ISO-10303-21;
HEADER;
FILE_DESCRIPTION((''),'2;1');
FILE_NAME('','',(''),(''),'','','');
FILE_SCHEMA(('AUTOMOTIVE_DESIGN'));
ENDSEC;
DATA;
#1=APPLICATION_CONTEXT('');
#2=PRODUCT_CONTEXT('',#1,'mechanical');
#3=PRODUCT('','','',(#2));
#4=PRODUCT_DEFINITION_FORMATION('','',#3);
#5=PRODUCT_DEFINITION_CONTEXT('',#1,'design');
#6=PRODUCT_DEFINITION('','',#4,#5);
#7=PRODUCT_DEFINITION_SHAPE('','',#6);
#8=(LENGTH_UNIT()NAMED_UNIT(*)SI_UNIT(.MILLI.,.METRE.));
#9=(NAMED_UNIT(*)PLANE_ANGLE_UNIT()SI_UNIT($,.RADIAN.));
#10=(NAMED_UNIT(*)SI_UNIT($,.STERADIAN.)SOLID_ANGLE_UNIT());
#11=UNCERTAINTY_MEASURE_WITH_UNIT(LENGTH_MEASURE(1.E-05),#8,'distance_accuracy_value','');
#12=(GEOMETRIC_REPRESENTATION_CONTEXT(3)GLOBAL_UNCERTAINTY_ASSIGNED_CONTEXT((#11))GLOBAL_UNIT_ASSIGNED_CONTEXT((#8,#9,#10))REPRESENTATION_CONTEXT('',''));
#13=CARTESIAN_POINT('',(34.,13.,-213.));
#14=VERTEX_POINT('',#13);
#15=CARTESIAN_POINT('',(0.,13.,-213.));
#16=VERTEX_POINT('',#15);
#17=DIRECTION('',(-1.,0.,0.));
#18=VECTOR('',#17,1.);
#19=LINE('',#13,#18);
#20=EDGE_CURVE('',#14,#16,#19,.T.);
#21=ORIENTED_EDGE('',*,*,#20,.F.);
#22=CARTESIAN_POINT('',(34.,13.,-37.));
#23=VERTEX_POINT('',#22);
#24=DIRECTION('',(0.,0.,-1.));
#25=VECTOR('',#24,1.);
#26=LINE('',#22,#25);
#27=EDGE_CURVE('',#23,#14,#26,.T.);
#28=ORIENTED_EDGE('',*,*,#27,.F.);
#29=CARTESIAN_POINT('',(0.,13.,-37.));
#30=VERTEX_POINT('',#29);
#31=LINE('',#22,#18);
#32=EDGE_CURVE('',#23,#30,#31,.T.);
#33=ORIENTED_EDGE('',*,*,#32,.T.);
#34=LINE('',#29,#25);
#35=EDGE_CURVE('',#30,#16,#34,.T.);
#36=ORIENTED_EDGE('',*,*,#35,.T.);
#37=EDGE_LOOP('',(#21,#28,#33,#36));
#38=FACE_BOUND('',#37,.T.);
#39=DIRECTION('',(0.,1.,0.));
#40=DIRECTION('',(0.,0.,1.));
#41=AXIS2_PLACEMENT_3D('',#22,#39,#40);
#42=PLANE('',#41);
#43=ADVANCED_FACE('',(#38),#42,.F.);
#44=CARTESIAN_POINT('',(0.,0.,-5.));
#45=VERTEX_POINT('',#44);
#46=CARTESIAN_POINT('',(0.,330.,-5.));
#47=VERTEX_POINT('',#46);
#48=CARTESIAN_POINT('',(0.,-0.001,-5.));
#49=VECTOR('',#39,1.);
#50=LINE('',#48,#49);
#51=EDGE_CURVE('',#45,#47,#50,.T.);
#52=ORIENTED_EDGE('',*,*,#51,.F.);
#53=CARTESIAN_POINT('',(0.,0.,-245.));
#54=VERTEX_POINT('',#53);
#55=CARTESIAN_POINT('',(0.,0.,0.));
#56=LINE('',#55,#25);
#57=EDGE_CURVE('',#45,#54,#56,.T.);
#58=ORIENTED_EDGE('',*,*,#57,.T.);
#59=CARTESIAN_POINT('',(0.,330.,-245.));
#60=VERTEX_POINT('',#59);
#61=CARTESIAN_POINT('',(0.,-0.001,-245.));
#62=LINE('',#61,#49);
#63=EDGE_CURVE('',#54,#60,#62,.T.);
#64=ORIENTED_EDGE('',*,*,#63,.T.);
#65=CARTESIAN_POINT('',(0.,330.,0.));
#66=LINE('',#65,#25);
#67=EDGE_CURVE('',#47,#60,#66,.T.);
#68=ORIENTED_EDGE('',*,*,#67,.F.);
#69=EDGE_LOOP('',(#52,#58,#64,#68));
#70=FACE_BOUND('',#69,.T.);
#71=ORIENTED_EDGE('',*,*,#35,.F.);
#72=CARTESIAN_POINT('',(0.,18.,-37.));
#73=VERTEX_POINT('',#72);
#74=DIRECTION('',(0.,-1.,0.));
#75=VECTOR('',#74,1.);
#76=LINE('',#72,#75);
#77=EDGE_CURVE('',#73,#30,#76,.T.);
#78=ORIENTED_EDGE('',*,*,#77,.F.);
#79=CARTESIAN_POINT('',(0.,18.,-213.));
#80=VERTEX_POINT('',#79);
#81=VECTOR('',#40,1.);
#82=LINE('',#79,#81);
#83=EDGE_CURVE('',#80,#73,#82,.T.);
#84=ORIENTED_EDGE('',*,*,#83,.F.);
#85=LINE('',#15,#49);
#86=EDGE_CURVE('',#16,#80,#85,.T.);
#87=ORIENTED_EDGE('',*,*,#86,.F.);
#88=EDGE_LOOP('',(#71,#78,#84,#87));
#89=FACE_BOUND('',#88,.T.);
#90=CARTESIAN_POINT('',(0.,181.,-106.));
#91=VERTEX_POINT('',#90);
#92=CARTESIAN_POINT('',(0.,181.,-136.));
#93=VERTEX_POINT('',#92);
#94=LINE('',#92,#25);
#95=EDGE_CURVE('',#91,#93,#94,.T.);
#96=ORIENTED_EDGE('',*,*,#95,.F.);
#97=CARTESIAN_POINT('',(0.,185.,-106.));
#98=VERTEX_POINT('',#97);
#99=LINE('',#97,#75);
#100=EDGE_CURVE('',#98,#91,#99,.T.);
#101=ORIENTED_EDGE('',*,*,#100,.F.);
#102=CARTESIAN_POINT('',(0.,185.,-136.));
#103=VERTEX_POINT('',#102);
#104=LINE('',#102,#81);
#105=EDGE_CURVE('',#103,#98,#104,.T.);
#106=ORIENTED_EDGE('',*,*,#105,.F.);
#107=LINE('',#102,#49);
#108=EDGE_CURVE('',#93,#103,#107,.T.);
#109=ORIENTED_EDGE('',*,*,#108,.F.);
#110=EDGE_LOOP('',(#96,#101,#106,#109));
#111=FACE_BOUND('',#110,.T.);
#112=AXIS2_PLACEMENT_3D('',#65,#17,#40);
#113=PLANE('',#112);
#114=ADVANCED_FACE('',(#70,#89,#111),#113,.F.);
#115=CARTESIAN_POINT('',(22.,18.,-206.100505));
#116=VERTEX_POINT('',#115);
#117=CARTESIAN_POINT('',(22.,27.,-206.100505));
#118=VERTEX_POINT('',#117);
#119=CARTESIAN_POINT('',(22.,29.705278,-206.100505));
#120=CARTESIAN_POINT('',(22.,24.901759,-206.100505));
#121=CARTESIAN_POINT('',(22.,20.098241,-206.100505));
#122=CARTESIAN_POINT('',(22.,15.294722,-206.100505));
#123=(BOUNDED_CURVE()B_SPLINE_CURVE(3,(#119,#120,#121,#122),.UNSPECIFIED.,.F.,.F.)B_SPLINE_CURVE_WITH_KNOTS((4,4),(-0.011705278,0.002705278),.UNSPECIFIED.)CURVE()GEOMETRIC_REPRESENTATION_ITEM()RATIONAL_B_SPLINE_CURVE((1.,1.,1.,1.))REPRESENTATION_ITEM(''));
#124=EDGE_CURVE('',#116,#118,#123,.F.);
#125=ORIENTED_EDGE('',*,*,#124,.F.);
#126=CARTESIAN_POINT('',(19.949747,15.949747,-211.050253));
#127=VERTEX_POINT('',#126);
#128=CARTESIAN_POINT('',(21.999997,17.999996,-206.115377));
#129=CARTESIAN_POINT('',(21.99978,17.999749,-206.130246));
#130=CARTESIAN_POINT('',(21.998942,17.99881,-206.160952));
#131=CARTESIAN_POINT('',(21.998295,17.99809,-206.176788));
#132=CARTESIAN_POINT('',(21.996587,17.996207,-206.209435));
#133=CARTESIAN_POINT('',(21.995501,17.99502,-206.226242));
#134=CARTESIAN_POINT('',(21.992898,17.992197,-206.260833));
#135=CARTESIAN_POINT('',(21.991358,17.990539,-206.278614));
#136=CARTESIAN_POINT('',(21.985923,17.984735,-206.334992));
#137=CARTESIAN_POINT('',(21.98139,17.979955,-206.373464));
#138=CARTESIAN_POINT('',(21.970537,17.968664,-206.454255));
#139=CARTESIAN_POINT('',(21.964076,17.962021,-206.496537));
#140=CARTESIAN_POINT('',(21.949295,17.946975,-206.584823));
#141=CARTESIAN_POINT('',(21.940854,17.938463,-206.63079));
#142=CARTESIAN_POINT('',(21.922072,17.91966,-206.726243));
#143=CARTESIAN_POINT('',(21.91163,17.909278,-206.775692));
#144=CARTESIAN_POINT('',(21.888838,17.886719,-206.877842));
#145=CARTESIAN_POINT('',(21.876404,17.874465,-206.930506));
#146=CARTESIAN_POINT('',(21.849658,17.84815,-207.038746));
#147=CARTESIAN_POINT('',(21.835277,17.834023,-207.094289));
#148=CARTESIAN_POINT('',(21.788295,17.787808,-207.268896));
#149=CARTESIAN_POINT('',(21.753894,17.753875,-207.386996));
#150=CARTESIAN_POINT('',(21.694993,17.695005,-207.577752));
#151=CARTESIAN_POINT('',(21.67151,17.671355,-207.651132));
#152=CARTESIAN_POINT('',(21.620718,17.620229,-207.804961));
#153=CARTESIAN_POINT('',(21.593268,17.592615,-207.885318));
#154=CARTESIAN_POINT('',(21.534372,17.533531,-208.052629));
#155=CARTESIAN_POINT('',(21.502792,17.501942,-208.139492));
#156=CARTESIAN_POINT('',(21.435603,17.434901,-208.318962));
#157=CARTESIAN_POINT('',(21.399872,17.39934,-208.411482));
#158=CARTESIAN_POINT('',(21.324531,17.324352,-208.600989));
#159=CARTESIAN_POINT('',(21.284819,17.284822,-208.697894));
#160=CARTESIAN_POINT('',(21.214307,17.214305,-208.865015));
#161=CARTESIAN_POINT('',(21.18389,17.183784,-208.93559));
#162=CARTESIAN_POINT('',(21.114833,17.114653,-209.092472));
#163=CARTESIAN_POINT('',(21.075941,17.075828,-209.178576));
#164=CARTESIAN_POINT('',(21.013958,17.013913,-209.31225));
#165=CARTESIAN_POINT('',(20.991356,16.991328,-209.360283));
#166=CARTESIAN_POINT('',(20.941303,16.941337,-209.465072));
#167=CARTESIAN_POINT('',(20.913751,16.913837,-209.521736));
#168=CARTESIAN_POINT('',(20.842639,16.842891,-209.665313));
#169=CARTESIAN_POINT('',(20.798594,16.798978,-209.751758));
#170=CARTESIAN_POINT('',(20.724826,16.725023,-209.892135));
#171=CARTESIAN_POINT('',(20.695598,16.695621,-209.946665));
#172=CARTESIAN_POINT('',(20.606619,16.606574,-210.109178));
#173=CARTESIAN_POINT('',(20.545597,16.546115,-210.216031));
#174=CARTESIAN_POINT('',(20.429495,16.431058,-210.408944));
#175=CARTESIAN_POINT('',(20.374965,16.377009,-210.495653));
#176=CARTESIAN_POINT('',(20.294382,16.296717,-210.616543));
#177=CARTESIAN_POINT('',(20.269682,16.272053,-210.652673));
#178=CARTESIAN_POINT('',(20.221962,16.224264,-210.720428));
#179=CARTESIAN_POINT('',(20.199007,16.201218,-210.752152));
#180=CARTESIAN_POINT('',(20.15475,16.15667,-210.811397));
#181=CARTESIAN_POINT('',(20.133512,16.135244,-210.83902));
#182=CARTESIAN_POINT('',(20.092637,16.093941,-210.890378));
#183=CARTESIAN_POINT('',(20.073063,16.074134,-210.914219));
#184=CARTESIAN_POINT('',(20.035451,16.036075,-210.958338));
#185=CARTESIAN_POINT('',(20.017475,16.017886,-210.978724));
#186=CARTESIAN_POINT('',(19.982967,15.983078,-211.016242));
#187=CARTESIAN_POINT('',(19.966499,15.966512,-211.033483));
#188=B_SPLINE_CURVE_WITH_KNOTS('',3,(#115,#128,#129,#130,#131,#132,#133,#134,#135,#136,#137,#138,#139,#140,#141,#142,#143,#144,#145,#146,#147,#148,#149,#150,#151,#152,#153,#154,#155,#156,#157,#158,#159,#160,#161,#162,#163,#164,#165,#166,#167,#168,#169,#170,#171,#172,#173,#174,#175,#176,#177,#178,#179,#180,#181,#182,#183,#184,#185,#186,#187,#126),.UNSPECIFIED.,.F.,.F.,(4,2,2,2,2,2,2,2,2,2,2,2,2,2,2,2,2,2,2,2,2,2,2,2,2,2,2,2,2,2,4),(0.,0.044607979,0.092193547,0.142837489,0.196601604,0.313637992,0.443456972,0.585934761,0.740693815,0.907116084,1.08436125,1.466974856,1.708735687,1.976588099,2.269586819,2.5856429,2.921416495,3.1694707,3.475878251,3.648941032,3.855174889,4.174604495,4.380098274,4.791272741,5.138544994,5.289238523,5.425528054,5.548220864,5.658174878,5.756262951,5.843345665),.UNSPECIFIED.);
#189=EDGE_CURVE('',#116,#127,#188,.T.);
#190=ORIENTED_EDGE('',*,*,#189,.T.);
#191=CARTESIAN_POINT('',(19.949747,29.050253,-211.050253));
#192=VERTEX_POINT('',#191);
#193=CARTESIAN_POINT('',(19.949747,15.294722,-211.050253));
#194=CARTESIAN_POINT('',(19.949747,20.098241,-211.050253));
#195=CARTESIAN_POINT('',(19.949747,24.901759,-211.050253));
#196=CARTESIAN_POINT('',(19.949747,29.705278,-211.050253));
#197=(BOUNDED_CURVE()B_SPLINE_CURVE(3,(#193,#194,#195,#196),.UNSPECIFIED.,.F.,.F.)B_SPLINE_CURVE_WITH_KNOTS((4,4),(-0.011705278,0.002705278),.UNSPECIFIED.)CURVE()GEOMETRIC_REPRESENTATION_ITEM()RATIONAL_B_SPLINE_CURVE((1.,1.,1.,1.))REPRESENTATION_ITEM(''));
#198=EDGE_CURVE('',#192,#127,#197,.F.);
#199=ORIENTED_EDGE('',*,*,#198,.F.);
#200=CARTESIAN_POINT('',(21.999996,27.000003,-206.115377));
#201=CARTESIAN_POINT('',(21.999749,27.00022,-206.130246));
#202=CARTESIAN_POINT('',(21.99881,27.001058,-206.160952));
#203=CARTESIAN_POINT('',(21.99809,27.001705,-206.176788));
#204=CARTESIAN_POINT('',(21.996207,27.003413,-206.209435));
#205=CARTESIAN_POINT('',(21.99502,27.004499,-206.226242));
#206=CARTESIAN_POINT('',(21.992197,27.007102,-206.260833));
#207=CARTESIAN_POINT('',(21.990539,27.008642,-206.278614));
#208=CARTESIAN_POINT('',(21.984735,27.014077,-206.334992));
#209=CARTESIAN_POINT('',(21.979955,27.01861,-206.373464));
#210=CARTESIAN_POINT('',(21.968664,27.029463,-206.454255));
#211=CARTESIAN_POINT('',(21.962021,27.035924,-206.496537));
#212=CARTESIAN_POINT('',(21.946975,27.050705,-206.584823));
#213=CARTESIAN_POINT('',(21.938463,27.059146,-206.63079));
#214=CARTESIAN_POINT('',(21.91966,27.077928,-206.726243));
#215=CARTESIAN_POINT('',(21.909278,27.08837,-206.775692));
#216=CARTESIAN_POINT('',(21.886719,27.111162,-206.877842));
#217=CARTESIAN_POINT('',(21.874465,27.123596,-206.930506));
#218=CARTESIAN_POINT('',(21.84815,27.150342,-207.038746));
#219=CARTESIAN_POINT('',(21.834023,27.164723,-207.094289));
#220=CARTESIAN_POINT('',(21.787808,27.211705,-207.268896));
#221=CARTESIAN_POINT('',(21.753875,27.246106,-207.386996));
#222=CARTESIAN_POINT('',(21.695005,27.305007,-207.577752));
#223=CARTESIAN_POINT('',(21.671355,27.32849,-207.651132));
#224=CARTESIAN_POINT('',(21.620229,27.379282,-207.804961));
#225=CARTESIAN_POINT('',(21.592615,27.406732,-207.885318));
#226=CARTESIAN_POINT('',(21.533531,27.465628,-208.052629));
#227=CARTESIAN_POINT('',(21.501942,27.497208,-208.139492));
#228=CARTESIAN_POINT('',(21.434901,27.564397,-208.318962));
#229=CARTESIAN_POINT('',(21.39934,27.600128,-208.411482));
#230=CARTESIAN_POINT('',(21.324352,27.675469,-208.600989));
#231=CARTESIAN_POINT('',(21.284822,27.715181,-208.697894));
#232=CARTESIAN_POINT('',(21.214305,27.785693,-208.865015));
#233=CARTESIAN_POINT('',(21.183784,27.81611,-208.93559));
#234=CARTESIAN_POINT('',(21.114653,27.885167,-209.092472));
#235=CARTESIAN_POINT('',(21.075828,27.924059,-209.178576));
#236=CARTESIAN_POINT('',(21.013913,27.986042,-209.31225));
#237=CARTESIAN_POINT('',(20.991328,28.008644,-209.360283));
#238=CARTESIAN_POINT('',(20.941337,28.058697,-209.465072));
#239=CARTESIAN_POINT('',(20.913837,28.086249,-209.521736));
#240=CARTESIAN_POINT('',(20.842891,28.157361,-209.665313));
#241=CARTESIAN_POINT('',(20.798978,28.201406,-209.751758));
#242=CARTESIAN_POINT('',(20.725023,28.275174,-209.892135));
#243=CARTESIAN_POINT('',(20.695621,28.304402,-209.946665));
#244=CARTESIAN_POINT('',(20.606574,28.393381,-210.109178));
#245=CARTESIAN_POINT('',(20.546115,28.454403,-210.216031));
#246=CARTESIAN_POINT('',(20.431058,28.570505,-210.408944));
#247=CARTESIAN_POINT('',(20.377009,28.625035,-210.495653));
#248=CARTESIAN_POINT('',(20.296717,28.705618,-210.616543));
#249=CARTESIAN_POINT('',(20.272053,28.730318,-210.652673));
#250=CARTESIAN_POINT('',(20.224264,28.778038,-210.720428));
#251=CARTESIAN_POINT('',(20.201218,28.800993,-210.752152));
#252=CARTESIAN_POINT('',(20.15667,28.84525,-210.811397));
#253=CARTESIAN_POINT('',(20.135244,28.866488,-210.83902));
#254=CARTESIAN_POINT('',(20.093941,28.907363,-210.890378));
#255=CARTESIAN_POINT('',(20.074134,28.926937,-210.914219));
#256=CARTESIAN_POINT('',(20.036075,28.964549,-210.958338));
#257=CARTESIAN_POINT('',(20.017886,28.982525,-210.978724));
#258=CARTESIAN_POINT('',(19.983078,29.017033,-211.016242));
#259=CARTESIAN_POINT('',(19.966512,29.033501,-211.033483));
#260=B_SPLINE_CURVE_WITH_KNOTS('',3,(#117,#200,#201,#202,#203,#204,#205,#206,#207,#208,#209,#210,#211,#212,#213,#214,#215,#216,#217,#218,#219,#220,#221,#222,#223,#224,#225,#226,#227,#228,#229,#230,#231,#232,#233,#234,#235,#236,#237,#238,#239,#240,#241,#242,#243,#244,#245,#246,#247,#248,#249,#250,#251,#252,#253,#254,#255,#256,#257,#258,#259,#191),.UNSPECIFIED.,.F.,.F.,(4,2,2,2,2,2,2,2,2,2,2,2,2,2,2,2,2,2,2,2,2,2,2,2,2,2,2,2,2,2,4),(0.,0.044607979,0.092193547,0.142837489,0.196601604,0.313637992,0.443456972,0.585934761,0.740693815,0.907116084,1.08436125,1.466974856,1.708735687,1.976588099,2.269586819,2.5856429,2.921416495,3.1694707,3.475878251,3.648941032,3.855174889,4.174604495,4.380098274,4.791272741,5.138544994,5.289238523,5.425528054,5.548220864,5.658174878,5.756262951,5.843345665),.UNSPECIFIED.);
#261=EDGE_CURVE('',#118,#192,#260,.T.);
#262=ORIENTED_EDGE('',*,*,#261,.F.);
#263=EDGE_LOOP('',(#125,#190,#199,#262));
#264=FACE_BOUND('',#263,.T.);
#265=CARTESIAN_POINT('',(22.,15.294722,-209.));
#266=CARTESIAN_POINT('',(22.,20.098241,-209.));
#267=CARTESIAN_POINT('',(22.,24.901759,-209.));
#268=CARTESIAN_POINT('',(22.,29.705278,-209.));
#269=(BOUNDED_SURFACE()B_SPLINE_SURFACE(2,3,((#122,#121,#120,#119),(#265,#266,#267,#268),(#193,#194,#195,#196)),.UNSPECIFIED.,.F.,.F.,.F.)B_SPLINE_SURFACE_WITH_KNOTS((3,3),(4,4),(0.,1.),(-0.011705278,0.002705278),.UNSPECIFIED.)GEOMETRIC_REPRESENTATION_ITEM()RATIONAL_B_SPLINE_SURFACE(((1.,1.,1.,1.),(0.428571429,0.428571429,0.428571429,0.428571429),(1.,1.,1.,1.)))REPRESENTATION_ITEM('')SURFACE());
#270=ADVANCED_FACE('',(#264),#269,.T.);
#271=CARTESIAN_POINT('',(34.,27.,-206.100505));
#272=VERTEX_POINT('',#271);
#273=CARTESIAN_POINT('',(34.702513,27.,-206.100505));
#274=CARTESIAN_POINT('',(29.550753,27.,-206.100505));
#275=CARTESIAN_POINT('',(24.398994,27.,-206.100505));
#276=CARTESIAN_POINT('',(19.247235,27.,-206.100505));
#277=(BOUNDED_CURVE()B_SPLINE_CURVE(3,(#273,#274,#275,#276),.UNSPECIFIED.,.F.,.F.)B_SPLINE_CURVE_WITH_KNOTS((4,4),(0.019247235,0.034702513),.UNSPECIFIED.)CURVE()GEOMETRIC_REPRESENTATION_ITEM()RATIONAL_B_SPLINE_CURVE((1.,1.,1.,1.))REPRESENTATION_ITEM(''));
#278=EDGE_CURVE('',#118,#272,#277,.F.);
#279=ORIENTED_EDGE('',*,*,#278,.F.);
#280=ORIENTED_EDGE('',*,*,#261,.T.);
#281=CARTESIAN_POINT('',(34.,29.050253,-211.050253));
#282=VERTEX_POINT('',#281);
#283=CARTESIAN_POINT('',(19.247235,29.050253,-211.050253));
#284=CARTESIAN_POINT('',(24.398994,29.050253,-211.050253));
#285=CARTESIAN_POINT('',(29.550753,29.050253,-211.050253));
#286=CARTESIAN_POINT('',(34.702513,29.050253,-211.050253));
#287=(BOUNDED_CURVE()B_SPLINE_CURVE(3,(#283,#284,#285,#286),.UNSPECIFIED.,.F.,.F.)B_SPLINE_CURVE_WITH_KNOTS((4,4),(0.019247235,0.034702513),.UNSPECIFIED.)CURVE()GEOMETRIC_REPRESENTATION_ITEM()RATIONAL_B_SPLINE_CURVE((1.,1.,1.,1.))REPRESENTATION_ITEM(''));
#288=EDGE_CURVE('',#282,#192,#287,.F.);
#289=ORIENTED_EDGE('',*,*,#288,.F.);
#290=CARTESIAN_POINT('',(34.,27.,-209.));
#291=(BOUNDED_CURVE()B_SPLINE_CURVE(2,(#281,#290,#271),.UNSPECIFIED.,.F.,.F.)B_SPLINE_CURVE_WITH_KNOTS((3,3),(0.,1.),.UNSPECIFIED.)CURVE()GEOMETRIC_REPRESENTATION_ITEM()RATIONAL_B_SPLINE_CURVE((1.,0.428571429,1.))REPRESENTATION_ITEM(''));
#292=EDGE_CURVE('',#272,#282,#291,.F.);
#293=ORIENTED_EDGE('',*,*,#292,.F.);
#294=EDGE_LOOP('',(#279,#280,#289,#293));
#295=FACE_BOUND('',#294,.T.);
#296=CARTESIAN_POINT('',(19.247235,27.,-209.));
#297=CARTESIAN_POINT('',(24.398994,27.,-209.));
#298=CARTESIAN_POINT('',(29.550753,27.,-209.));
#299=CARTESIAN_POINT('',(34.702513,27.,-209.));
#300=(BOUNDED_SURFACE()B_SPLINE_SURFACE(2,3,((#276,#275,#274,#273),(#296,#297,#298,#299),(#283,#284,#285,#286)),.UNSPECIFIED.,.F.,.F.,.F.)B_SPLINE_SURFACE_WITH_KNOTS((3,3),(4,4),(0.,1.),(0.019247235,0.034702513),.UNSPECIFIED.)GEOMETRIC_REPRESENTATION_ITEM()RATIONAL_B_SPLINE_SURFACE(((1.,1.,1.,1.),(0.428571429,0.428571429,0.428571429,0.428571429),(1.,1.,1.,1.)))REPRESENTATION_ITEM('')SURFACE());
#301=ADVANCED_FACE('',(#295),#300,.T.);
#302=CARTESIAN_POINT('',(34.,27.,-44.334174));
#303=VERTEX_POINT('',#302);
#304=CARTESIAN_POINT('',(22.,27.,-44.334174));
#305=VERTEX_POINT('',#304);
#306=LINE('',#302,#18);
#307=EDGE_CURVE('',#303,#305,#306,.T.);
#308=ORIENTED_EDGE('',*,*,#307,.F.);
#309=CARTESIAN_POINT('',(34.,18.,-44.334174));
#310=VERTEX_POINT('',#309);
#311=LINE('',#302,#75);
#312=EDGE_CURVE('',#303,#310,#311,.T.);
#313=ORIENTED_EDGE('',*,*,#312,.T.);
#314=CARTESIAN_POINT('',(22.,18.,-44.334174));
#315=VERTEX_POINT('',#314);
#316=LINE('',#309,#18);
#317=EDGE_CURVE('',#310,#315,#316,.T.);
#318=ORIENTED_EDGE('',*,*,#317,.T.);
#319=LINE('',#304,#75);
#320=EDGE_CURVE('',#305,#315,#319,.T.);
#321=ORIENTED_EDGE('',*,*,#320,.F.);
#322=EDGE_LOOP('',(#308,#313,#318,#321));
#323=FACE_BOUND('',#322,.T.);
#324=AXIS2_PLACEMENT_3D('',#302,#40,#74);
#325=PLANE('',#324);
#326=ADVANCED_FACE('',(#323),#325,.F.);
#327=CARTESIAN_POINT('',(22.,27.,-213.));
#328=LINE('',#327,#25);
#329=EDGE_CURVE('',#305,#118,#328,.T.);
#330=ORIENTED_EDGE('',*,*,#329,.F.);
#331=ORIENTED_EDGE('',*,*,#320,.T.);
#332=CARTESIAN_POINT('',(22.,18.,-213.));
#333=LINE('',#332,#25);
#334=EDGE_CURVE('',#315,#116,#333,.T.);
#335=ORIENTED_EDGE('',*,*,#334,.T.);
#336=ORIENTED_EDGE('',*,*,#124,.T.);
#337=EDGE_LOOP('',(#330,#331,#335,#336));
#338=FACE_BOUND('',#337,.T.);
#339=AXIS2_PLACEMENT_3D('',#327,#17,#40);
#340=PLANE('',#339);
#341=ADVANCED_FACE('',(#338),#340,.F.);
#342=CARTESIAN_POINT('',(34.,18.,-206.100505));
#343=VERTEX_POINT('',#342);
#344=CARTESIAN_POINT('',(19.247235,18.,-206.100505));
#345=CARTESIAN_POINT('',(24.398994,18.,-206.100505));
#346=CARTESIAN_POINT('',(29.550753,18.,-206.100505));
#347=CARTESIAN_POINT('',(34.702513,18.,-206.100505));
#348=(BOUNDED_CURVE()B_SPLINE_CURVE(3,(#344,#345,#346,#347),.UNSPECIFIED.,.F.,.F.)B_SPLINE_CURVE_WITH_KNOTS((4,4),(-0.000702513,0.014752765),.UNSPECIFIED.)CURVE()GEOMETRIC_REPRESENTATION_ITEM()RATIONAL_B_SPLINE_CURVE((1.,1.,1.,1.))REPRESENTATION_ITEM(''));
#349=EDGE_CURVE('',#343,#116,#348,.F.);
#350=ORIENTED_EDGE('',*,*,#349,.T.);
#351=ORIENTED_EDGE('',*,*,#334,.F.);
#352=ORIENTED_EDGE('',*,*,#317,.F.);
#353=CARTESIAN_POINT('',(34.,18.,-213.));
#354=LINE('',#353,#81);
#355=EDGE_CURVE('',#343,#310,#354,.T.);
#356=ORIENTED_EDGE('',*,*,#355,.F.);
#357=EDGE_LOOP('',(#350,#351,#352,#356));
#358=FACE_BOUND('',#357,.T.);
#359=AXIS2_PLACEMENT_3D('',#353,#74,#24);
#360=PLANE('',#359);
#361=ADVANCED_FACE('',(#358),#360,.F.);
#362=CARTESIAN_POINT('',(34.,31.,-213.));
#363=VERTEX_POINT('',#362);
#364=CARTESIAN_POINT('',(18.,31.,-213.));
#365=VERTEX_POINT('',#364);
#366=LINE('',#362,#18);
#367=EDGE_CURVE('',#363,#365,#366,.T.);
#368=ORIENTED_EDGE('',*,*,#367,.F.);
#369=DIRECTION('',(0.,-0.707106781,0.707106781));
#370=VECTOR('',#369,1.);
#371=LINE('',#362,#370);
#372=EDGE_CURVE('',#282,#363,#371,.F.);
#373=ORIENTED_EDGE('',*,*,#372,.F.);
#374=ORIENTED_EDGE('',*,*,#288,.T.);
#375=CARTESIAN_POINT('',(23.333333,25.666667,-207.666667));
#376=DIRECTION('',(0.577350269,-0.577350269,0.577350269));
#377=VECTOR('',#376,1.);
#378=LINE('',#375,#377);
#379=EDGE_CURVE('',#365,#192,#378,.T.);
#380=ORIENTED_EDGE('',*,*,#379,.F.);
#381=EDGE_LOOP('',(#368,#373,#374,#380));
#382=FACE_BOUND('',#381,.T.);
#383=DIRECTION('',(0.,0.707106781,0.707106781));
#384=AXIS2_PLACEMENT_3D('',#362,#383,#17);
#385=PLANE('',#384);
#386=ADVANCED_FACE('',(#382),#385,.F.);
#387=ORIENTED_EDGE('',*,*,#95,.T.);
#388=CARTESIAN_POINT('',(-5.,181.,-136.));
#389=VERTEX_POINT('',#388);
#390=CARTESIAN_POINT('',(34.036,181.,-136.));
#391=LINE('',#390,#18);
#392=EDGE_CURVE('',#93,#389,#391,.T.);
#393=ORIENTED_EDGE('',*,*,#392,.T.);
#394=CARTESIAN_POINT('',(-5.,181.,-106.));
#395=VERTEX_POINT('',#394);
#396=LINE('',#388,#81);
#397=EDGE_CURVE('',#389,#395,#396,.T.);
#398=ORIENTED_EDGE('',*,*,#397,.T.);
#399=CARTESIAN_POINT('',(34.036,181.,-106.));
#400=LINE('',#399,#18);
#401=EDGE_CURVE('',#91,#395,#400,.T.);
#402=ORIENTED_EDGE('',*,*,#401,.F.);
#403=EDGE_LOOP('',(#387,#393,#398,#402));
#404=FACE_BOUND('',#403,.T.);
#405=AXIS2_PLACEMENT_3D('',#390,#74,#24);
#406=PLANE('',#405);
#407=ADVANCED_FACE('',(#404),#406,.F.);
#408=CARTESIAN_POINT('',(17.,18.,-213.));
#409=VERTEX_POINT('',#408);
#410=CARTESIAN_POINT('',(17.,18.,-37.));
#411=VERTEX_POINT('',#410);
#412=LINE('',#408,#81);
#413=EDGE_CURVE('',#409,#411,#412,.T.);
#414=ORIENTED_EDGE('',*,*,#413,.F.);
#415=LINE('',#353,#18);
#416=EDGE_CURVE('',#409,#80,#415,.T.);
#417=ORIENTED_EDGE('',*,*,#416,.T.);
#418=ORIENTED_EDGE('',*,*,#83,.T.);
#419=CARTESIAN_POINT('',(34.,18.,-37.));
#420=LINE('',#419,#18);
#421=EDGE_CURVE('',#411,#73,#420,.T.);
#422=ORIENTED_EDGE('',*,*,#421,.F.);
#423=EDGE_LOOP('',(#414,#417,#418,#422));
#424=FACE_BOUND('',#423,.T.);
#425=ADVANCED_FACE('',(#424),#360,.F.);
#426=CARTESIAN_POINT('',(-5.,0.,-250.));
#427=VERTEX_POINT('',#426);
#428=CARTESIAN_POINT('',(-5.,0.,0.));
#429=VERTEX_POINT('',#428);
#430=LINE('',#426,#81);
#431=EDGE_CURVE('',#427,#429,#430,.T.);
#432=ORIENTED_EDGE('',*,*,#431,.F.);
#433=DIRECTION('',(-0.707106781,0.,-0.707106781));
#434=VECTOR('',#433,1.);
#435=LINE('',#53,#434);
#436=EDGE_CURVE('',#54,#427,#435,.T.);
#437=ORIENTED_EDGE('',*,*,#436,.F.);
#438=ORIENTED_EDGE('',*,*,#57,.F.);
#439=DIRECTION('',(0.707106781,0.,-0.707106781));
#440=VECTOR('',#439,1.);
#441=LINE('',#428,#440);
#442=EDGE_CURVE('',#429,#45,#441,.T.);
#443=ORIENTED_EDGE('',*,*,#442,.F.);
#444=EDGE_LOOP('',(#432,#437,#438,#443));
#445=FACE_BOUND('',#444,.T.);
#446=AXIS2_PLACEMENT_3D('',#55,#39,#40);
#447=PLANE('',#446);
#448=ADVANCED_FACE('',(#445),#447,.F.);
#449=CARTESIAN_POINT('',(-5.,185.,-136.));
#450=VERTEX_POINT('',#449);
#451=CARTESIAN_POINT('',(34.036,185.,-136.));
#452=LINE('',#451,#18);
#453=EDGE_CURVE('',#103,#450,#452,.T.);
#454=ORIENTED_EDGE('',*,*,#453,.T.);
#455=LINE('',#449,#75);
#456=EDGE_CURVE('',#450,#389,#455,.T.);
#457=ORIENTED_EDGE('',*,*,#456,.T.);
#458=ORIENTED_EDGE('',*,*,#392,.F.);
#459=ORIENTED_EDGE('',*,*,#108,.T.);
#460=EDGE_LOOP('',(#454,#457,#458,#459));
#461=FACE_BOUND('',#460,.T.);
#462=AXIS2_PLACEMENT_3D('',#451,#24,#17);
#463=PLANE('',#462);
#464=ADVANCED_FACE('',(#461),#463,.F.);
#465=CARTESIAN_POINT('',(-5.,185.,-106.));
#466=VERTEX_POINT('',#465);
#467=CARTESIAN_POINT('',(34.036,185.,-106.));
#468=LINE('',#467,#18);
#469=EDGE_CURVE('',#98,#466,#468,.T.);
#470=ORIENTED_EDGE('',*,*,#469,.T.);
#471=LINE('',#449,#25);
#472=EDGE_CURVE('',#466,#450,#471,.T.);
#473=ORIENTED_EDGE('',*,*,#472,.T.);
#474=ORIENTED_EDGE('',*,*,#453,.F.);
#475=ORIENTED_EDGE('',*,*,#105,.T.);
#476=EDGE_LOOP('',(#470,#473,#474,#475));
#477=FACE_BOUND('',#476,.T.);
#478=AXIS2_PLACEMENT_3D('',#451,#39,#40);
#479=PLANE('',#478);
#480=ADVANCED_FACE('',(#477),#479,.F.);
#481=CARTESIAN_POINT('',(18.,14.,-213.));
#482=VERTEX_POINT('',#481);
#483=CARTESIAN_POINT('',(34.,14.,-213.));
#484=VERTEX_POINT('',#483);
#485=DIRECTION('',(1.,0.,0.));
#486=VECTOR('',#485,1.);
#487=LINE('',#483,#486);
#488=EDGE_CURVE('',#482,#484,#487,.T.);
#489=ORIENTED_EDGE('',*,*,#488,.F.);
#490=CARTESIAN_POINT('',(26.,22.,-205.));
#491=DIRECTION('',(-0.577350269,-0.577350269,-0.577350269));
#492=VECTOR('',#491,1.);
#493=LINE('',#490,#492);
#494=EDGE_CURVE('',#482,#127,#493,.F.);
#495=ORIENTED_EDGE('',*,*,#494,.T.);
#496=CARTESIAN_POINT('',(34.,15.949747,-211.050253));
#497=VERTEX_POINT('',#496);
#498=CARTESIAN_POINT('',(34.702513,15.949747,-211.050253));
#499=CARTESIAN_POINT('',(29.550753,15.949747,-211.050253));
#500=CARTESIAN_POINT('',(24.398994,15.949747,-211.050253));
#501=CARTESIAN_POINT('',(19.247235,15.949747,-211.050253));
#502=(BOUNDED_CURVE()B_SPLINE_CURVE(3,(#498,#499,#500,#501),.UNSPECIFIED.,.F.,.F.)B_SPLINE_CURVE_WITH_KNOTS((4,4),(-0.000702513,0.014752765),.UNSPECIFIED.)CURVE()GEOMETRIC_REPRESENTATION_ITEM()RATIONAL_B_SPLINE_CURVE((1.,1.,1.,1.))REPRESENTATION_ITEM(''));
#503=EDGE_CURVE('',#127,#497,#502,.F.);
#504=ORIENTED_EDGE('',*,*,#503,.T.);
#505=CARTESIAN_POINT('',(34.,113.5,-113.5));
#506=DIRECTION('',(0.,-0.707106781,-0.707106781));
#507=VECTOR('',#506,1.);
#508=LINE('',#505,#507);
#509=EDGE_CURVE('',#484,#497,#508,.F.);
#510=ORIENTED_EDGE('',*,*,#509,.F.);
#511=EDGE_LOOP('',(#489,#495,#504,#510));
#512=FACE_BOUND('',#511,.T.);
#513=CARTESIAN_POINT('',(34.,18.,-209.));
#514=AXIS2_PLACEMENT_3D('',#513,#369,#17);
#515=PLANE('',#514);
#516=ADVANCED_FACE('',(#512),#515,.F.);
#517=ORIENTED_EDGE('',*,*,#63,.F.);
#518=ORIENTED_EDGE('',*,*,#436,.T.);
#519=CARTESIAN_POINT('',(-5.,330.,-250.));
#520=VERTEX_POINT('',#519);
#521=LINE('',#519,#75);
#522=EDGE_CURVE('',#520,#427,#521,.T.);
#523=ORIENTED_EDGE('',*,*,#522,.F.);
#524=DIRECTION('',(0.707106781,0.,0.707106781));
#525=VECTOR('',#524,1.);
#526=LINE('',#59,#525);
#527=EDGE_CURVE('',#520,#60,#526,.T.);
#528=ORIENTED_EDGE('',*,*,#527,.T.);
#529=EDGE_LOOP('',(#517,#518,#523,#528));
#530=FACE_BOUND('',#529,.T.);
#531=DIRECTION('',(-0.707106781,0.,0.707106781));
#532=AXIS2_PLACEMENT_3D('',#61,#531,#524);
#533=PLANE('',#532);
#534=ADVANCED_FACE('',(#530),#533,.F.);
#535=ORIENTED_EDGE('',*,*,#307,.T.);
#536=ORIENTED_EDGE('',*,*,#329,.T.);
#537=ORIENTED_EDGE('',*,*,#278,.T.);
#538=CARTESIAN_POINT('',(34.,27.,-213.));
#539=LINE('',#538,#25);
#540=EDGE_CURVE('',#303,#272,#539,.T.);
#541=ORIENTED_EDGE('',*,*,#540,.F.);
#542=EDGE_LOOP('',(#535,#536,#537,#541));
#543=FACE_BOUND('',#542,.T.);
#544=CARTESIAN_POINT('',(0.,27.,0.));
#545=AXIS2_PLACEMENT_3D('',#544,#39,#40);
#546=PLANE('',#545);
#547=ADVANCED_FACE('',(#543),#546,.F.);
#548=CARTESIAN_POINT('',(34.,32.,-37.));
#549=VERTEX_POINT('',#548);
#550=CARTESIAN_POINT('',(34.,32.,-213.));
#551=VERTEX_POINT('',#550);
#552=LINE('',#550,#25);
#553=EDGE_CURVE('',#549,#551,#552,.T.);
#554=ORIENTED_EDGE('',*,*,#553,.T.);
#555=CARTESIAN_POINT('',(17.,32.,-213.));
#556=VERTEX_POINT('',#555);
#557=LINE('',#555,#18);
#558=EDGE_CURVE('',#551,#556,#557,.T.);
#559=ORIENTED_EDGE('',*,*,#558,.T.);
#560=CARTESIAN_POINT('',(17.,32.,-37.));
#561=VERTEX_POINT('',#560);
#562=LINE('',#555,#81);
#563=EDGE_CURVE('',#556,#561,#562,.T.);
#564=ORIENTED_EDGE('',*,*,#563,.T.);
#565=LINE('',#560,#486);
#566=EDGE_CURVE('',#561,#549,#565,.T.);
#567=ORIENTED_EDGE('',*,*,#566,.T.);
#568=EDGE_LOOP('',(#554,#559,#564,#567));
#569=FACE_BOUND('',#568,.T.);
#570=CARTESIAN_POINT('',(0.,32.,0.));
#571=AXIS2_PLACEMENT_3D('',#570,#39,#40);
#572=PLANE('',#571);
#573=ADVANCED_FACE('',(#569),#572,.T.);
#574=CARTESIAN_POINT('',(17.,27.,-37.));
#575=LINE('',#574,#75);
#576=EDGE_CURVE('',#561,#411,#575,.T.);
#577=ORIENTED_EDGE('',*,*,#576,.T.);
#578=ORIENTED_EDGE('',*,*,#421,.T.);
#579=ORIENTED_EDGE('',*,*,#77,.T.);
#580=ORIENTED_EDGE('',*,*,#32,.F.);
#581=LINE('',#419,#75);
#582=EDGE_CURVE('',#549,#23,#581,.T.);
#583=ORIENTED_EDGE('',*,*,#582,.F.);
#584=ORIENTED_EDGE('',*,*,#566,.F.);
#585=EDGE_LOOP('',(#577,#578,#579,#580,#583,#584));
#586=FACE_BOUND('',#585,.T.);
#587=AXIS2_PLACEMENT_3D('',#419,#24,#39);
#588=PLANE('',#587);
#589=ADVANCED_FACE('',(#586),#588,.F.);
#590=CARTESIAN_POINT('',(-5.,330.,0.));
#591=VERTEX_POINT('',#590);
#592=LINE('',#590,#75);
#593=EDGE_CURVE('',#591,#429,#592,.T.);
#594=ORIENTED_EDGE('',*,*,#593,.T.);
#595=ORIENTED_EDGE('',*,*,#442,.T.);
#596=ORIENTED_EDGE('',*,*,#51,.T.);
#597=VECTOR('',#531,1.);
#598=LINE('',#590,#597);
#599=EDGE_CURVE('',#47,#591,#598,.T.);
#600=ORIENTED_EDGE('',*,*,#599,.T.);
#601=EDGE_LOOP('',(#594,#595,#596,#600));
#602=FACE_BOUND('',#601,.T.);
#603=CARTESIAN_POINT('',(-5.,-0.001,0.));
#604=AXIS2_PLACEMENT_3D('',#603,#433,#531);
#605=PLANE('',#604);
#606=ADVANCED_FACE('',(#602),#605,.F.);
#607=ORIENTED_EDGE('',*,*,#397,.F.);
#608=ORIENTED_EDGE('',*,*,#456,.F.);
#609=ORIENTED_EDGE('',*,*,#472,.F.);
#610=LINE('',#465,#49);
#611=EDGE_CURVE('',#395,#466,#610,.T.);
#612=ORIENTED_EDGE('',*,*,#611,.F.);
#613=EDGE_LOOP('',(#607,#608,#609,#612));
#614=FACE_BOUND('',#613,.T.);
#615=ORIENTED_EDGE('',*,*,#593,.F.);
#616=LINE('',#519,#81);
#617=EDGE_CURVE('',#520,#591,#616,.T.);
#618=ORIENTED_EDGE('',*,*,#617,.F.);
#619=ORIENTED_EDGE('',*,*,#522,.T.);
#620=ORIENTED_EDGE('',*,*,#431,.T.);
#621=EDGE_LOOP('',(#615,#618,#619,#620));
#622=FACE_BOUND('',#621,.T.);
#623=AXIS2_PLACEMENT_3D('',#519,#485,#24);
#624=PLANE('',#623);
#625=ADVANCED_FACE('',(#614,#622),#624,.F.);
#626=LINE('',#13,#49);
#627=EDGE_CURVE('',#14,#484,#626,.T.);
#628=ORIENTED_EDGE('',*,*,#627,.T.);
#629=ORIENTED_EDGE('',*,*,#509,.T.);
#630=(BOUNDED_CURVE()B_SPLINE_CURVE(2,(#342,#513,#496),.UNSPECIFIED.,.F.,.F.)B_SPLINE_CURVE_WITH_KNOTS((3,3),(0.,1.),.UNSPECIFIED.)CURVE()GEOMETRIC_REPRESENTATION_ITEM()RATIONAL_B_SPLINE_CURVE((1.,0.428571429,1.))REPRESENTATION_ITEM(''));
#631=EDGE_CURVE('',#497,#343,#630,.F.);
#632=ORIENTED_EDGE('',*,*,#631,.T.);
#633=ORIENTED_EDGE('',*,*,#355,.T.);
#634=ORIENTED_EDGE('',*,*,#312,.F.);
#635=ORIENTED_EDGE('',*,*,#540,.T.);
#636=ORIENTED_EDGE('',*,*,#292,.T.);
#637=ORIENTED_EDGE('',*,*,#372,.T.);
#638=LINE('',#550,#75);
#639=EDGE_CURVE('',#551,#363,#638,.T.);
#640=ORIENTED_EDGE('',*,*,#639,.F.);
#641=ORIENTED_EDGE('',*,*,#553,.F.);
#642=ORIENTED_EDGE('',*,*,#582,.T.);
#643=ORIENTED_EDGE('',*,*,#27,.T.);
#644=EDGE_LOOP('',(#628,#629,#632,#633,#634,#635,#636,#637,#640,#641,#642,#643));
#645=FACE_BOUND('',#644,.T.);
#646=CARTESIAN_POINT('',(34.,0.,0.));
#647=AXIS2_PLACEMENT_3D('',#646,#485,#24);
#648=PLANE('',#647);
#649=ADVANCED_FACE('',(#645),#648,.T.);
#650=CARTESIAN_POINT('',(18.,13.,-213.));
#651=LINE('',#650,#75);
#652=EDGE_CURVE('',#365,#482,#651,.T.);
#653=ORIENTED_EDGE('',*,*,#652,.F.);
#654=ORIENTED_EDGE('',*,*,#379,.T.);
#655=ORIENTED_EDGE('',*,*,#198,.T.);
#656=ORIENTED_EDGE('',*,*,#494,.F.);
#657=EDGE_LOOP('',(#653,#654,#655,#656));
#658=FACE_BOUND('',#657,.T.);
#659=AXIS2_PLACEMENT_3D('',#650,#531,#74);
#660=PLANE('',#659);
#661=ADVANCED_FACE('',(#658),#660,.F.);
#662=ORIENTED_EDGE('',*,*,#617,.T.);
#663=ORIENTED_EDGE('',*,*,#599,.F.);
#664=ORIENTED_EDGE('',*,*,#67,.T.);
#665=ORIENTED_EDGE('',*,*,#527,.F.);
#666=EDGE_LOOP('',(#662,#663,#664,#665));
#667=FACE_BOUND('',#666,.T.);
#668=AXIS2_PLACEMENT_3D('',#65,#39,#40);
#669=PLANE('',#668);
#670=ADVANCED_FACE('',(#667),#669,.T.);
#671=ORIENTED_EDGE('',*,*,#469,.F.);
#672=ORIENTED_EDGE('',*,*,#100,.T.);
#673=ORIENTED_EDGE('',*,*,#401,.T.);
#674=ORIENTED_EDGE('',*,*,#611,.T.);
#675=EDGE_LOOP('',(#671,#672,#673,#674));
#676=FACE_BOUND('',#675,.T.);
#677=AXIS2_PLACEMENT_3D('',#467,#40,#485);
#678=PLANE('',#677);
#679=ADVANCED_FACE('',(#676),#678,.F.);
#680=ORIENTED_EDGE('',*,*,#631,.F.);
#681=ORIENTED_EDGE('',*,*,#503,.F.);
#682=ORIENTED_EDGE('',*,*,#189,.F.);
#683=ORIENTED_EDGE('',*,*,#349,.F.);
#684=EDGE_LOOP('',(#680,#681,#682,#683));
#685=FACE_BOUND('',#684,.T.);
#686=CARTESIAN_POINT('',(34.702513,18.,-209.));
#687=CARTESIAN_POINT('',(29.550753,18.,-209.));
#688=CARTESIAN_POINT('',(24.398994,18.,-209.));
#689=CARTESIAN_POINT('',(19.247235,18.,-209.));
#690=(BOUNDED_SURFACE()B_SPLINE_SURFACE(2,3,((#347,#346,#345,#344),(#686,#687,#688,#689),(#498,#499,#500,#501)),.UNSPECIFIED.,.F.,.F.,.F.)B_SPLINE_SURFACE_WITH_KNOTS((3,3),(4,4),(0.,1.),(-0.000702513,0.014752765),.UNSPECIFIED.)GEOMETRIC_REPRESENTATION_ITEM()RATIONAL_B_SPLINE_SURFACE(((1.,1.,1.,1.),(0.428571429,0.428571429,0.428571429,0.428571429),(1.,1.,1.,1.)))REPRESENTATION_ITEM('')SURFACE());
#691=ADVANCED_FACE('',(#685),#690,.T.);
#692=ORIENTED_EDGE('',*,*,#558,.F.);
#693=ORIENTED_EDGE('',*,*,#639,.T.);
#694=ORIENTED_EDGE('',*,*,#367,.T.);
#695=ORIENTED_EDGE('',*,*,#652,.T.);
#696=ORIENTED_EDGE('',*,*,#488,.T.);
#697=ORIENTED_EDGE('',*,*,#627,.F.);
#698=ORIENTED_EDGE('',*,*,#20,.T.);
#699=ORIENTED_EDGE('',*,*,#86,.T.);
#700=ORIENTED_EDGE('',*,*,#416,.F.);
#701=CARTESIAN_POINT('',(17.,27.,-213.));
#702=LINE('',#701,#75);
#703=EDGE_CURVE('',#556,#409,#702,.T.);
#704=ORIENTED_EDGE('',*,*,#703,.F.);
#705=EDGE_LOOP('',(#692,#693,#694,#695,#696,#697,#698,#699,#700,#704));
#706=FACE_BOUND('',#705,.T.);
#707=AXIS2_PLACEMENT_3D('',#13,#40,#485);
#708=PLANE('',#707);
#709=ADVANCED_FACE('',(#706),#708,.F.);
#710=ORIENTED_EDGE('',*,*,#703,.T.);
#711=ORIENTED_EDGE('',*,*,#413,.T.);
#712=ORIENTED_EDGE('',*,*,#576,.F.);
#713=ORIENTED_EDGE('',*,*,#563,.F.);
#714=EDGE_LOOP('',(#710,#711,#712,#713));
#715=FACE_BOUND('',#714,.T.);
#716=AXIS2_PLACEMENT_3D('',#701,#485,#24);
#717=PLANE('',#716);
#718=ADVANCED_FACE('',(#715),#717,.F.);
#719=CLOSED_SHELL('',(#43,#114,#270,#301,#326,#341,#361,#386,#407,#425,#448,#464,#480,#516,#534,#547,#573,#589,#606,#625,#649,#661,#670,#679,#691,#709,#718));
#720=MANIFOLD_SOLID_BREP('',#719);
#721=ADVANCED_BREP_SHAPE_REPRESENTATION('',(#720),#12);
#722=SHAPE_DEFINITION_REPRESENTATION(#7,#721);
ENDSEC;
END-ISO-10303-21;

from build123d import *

# Parameters (mm, degrees)
CROQUIS1_W              = 5
CROQUIS1_H              = 250
SALIENTE_EXTRUIR1_DEPTH = 330
CORTAR_EXTRUIR1_REACH   = 416.035
CROQUIS3_W              = 176
CROQUIS3_H              = 5
SALIENTE_EXTRUIR2_DEPTH = 34
CROQUIS4_W              = 5
CROQUIS4_H              = 176
SALIENTE_EXTRUIR3_DEPTH = 9
CROQUIS5_W              = 17
CROQUIS5_H              = 176
SALIENTE_EXTRUIR4_DEPTH = 5
REDONDEO1_SIZE          = 4
CROQUIS6_W              = 12
CROQUIS6_H              = 7.334173777
SALIENTE_EXTRUIR5_DEPTH = 9
CORTAR_EXTRUIR2_REACH   = 417.838
CROQUIS7_W              = 30
CROQUIS7_H              = 4


with BuildPart() as part:
    # Croquis1 → Saliente-Extruir1 (new body)
    with BuildSketch(Plane(origin=(0, 0, 0), x_dir=(1, 0, 0), z_dir=(0, 1, 0))):
        with Locations((-2.5, 125)):
            Rectangle(CROQUIS1_W, CROQUIS1_H)
    extrude(amount=SALIENTE_EXTRUIR1_DEPTH)

    # Croquis2 → Cortar-Extruir1 (cut, up to next)
    with BuildSketch(Plane(origin=(0, 330, 0), x_dir=(1, 0, 0), z_dir=(0, 1, 0)), mode=Mode.PRIVATE) as cortar_extruir1_sk1:
        Polygon((0, 250), (0, 245), (-5, 250), align=None)
    cortar_extruir1_tool1 = extrude(cortar_extruir1_sk1.sketch, amount=-CORTAR_EXTRUIR1_REACH, mode=Mode.PRIVATE) & part.part
    # Croquis2 → Cortar-Extruir1 (cut, up to next)
    with BuildSketch(Plane(origin=(0, 330, 0), x_dir=(1, 0, 0), z_dir=(0, 1, 0)), mode=Mode.PRIVATE) as cortar_extruir1_sk2:
        Polygon((-5, 0), (0, 5), (0, 0), align=None)
    cortar_extruir1_tool2 = extrude(cortar_extruir1_sk2.sketch, amount=-CORTAR_EXTRUIR1_REACH, mode=Mode.PRIVATE) & part.part
    add(cortar_extruir1_tool1.solids().sort_by_distance((-1.666667, 330, -248.333333))[0], mode=Mode.SUBTRACT)
    add(cortar_extruir1_tool2.solids().sort_by_distance((-1.666667, 330, -1.666667))[0], mode=Mode.SUBTRACT)

    # Croquis3 → Saliente-Extruir2 (add)
    with BuildSketch(Plane(origin=(0, 0, 0), x_dir=(0, 0, -1), z_dir=(1, 0, 0))):
        with Locations((125, 15.5)):
            Rectangle(CROQUIS3_W, CROQUIS3_H)
    extrude(amount=SALIENTE_EXTRUIR2_DEPTH)

    # Croquis4 → Saliente-Extruir3 (add)
    with BuildSketch(Plane(origin=(0, 18, 0), x_dir=(1, 0, 0), z_dir=(0, 1, 0))):
        with Locations((19.5, 125)):
            Rectangle(CROQUIS4_W, CROQUIS4_H)
    extrude(amount=SALIENTE_EXTRUIR3_DEPTH)

    # Croquis5 → Saliente-Extruir4 (add)
    with BuildSketch(Plane(origin=(0, 27, 0), x_dir=(1, 0, 0), z_dir=(0, 1, 0))):
        with Locations((25.5, 125)):
            Rectangle(CROQUIS5_W, CROQUIS5_H)
    extrude(amount=SALIENTE_EXTRUIR4_DEPTH)

    # Redondeo1
    redondeo1_edges = [part.edges().sort_by_distance(p)[0] for p in [
        (28, 18, -213),
        (22, 22.5, -213),
        (28, 27, -213),
    ]]
    chamfer(redondeo1_edges, length=REDONDEO1_SIZE)

    # Redondeo2
    # a fillet whose section is not a circle: 7 mm, written as the material it takes off along each edge
    with BuildSketch(Plane(origin=(22, 27, -209), x_dir=(0, 0.7071067811865493, -0.7071067811865457), z_dir=(1, 0, 0))) as redondeo2_piece_1_section:
        with BuildLine():
            Bezier((2.899494937, 0), (0, 0), (-2.050252532, 2.050252532), weights=[1, 0.428571429, 1])
            Line((-2.050252532, 2.050252532), (0, 0))
            Line((0, 0), (2.899494937, 0))
        make_face()
    redondeo2_piece_1 = extrude(amount=19.248737342, mode=Mode.PRIVATE)
    redondeo2_piece_1 = split(redondeo2_piece_1, bisect_by=Plane(origin=(22, 27, -209), z_dir=(-0.7071067811865476, 0, 0.7071067811865476)), keep=Keep.TOP, mode=Mode.PRIVATE)
    add(redondeo2_piece_1, mode=Mode.SUBTRACT)
    with BuildSketch(Plane(origin=(14.751262658, 27, -209), x_dir=(0, 0.7071067811865493, -0.7071067811865457), z_dir=(1, 0, 0))) as redondeo2_piece_2_section:
        with BuildLine():
            Bezier((2.899494937, 0), (0, 0), (-2.050252532, 2.050252532), weights=[1, 0.428571429, 1])
            Line((-2.050252532, 2.050252532), (0, 0))
            Line((0, 0), (2.899494937, 0))
        make_face()
    redondeo2_piece_2 = extrude(amount=26.497474683, mode=Mode.PRIVATE)
    redondeo2_piece_2 = split(redondeo2_piece_2, bisect_by=Plane(origin=(18.375631329, 27, -212.624368671), z_dir=(0.7071067811865476, 0, -0.7071067811865476)), keep=Keep.TOP, mode=Mode.PRIVATE)
    redondeo2_piece_2 = split(redondeo2_piece_2, bisect_by=Plane(origin=(22, 27, -209), z_dir=(-1, 0, 0)), keep=Keep.TOP, mode=Mode.PRIVATE)
    add(redondeo2_piece_2, mode=Mode.SUBTRACT)
    with BuildSketch(Plane(origin=(22, 27, -209), x_dir=(0, 0.7071067811865493, -0.7071067811865457), z_dir=(1, 0, 0))) as redondeo2_piece_3_section:
        with BuildLine():
            Bezier((2.899494937, 0), (0, 0), (-2.050252532, 2.050252532), weights=[1, 0.428571429, 1])
            Line((-2.050252532, 2.050252532), (0, 0))
            Line((0, 0), (2.899494937, 0))
        make_face()
    redondeo2_piece_3 = extrude(amount=19.248737342, mode=Mode.PRIVATE)
    redondeo2_piece_3 = split(redondeo2_piece_3, bisect_by=Plane(origin=(22, 27, -209), z_dir=(0.7071067811865476, 0, -0.7071067811865476)), keep=Keep.TOP, mode=Mode.PRIVATE)
    add(redondeo2_piece_3, mode=Mode.SUBTRACT)
    with BuildSketch(Plane(origin=(22, 18, -209), x_dir=(-0.7071067811865493, 0, -0.7071067811865457), z_dir=(0, 1, 0))) as redondeo2_piece_4_section:
        with BuildLine():
            Bezier((2.899494937, 0), (0, 0), (-2.050252532, 2.050252532), weights=[1, 0.428571429, 1])
            Line((-2.050252532, 2.050252532), (0, 0))
            Line((0, 0), (2.899494937, 0))
        make_face()
    redondeo2_piece_4 = extrude(amount=9, mode=Mode.PRIVATE)
    redondeo2_piece_4 = split(redondeo2_piece_4, bisect_by=Plane(origin=(22, 18, -209), z_dir=(0, -0.7071067811865476, 0.7071067811865476)), keep=Keep.TOP, mode=Mode.PRIVATE)
    add(redondeo2_piece_4, mode=Mode.SUBTRACT)
    with BuildSketch(Plane(origin=(22, 10.751262658, -209), x_dir=(-0.7071067811865493, 0, -0.7071067811865457), z_dir=(0, 1, 0))) as redondeo2_piece_5_section:
        with BuildLine():
            Bezier((2.899494937, 0), (0, 0), (-2.050252532, 2.050252532), weights=[1, 0.428571429, 1])
            Line((-2.050252532, 2.050252532), (0, 0))
            Line((0, 0), (2.899494937, 0))
        make_face()
    redondeo2_piece_5 = extrude(amount=16.248737342, mode=Mode.PRIVATE)
    redondeo2_piece_5 = split(redondeo2_piece_5, bisect_by=Plane(origin=(22, 14.375631329, -212.624368671), z_dir=(0, 0.7071067811865476, -0.7071067811865476)), keep=Keep.TOP, mode=Mode.PRIVATE)
    redondeo2_piece_5 = split(redondeo2_piece_5, bisect_by=Plane(origin=(22, 18, -209), z_dir=(0, -1, 0)), keep=Keep.TOP, mode=Mode.PRIVATE)
    add(redondeo2_piece_5, mode=Mode.SUBTRACT)
    with BuildSketch(Plane(origin=(22, 18, -209), x_dir=(-0.7071067811865493, 0, -0.7071067811865457), z_dir=(0, 1, 0))) as redondeo2_piece_6_section:
        with BuildLine():
            Bezier((2.899494937, 0), (0, 0), (-2.050252532, 2.050252532), weights=[1, 0.428571429, 1])
            Line((-2.050252532, 2.050252532), (0, 0))
            Line((0, 0), (2.899494937, 0))
        make_face()
    redondeo2_piece_6 = extrude(amount=9, mode=Mode.PRIVATE)
    redondeo2_piece_6 = split(redondeo2_piece_6, bisect_by=Plane(origin=(22, 18, -209), z_dir=(0, 0.7071067811865476, -0.7071067811865476)), keep=Keep.TOP, mode=Mode.PRIVATE)
    redondeo2_piece_6 = split(redondeo2_piece_6, bisect_by=Plane(origin=(22, 22.5, -204.5), z_dir=(0, -0.7071067811865476, -0.7071067811865476)), keep=Keep.TOP, mode=Mode.PRIVATE)
    add(redondeo2_piece_6, mode=Mode.SUBTRACT)
    with BuildSketch(Plane(origin=(22, 18, -209), x_dir=(-0.7071067811865493, 0, -0.7071067811865457), z_dir=(0, 1, 0))) as redondeo2_piece_7_section:
        with BuildLine():
            Bezier((2.899494937, 0), (0, 0), (-2.050252532, 2.050252532), weights=[1, 0.428571429, 1])
            Line((-2.050252532, 2.050252532), (0, 0))
            Line((0, 0), (2.899494937, 0))
        make_face()
    redondeo2_piece_7 = extrude(amount=9, mode=Mode.PRIVATE)
    redondeo2_piece_7 = split(redondeo2_piece_7, bisect_by=Plane(origin=(22, 22.5, -204.5), z_dir=(0, 0.7071067811865476, 0.7071067811865476)), keep=Keep.TOP, mode=Mode.PRIVATE)
    add(redondeo2_piece_7, mode=Mode.SUBTRACT)
    with BuildSketch(Plane(origin=(22, 18, -209), x_dir=(-0.7071067811865493, 0, -0.7071067811865457), z_dir=(0, 1, 0))) as redondeo2_piece_8_section:
        with BuildLine():
            Bezier((2.899494937, 0), (0, 0), (-2.050252532, 2.050252532), weights=[1, 0.428571429, 1])
            Line((-2.050252532, 2.050252532), (0, 0))
            Line((0, 0), (2.899494937, 0))
        make_face()
    redondeo2_piece_8 = extrude(amount=16.248737342, mode=Mode.PRIVATE)
    redondeo2_piece_8 = split(redondeo2_piece_8, bisect_by=Plane(origin=(22, 22.5, -204.5), z_dir=(0, -0.7071067811865476, -0.7071067811865476)), keep=Keep.TOP, mode=Mode.PRIVATE)
    redondeo2_piece_8 = split(redondeo2_piece_8, bisect_by=Plane(origin=(22, 27, -209), z_dir=(0, 1, 0)), keep=Keep.TOP, mode=Mode.PRIVATE)
    add(redondeo2_piece_8, mode=Mode.SUBTRACT)
    with BuildSketch(Plane(origin=(22, 18, -209), x_dir=(0, -0.7071067811865497, -0.7071067811865454), z_dir=(1, 0, 0))) as redondeo2_piece_9_section:
        with BuildLine():
            Bezier((2.899494937, 0), (0, 0), (-2.050252532, -2.050252532), weights=[1, 0.428571429, 1])
            Line((-2.050252532, -2.050252532), (0, 0))
            Line((0, 0), (2.899494937, 0))
        make_face()
    redondeo2_piece_9 = extrude(amount=19.248737342, mode=Mode.PRIVATE)
    redondeo2_piece_9 = split(redondeo2_piece_9, bisect_by=Plane(origin=(22, 18, -209), z_dir=(-0.7071067811865476, 0, 0.7071067811865476)), keep=Keep.TOP, mode=Mode.PRIVATE)
    add(redondeo2_piece_9, mode=Mode.SUBTRACT)
    with BuildSketch(Plane(origin=(14.751262658, 18, -209), x_dir=(0, -0.7071067811865497, -0.7071067811865454), z_dir=(1, 0, 0))) as redondeo2_piece_10_section:
        with BuildLine():
            Bezier((2.899494937, 0), (0, 0), (-2.050252532, -2.050252532), weights=[1, 0.428571429, 1])
            Line((-2.050252532, -2.050252532), (0, 0))
            Line((0, 0), (2.899494937, 0))
        make_face()
    redondeo2_piece_10 = extrude(amount=26.497474683, mode=Mode.PRIVATE)
    redondeo2_piece_10 = split(redondeo2_piece_10, bisect_by=Plane(origin=(18.375631329, 18, -212.624368671), z_dir=(0.7071067811865476, 0, -0.7071067811865476)), keep=Keep.TOP, mode=Mode.PRIVATE)
    redondeo2_piece_10 = split(redondeo2_piece_10, bisect_by=Plane(origin=(22, 18, -209), z_dir=(-1, 0, 0)), keep=Keep.TOP, mode=Mode.PRIVATE)
    add(redondeo2_piece_10, mode=Mode.SUBTRACT)
    with BuildSketch(Plane(origin=(22, 18, -209), x_dir=(0, -0.7071067811865497, -0.7071067811865454), z_dir=(1, 0, 0))) as redondeo2_piece_11_section:
        with BuildLine():
            Bezier((2.899494937, 0), (0, 0), (-2.050252532, -2.050252532), weights=[1, 0.428571429, 1])
            Line((-2.050252532, -2.050252532), (0, 0))
            Line((0, 0), (2.899494937, 0))
        make_face()
    redondeo2_piece_11 = extrude(amount=19.248737342, mode=Mode.PRIVATE)
    redondeo2_piece_11 = split(redondeo2_piece_11, bisect_by=Plane(origin=(22, 18, -209), z_dir=(0.7071067811865476, 0, -0.7071067811865476)), keep=Keep.TOP, mode=Mode.PRIVATE)
    add(redondeo2_piece_11, mode=Mode.SUBTRACT)
    with BuildSketch(Plane(origin=(22, 18, -209), x_dir=(-0.7071067811865493, 0, -0.7071067811865457), z_dir=(0, 1, 0))) as redondeo2_piece_12a_section:
        with BuildLine():
            Bezier((2.899494937, 0), (0, 0), (-2.050252532, 2.050252532), weights=[1, 0.428571429, 1])
            Line((-2.050252532, 2.050252532), (0, 0))
            Line((0, 0), (2.899494937, 0))
        make_face()
    redondeo2_piece_12a = extrude(amount=16.248737342, mode=Mode.PRIVATE)
    redondeo2_piece_12a = split(redondeo2_piece_12a, bisect_by=Plane(origin=(22, 22.5, -204.5), z_dir=(0, 0.7071067811865476, 0.7071067811865476)), keep=Keep.TOP, mode=Mode.PRIVATE)
    redondeo2_piece_12a = split(redondeo2_piece_12a, bisect_by=Plane(origin=(22, 27, -209), z_dir=(0, 1, 0)), keep=Keep.TOP, mode=Mode.PRIVATE)
    with BuildSketch(Plane(origin=(14.751262658, 27, -209), x_dir=(0, 0.7071067811865493, -0.7071067811865457), z_dir=(1, 0, 0))) as redondeo2_piece_12b_section:
        with BuildLine():
            Bezier((2.899494937, 0), (0, 0), (-2.050252532, 2.050252532), weights=[1, 0.428571429, 1])
            Line((-2.050252532, 2.050252532), (0, 0))
            Line((0, 0), (2.899494937, 0))
        make_face()
    redondeo2_piece_12b = extrude(amount=26.497474683, mode=Mode.PRIVATE)
    redondeo2_piece_12b = split(redondeo2_piece_12b, bisect_by=Plane(origin=(18.375631329, 27, -212.624368671), z_dir=(-0.7071067811865476, 0, 0.7071067811865476)), keep=Keep.TOP, mode=Mode.PRIVATE)
    redondeo2_piece_12b = split(redondeo2_piece_12b, bisect_by=Plane(origin=(22, 27, -209), z_dir=(-1, 0, 0)), keep=Keep.TOP, mode=Mode.PRIVATE)
    redondeo2_piece_12 = redondeo2_piece_12a & redondeo2_piece_12b
    add(redondeo2_piece_12, mode=Mode.SUBTRACT)
    with BuildSketch(Plane(origin=(14.751262658, 18, -209), x_dir=(0, -0.7071067811865497, -0.7071067811865454), z_dir=(1, 0, 0))) as redondeo2_piece_13a_section:
        with BuildLine():
            Bezier((2.899494937, 0), (0, 0), (-2.050252532, -2.050252532), weights=[1, 0.428571429, 1])
            Line((-2.050252532, -2.050252532), (0, 0))
            Line((0, 0), (2.899494937, 0))
        make_face()
    redondeo2_piece_13a = extrude(amount=26.497474683, mode=Mode.PRIVATE)
    redondeo2_piece_13a = split(redondeo2_piece_13a, bisect_by=Plane(origin=(18.375631329, 18, -212.624368671), z_dir=(-0.7071067811865476, 0, 0.7071067811865476)), keep=Keep.TOP, mode=Mode.PRIVATE)
    redondeo2_piece_13a = split(redondeo2_piece_13a, bisect_by=Plane(origin=(22, 18, -209), z_dir=(-1, 0, 0)), keep=Keep.TOP, mode=Mode.PRIVATE)
    redondeo2_piece_13a = split(redondeo2_piece_13a, bisect_by=Plane(origin=(17, 18, -209), z_dir=(1, 0, 0)), keep=Keep.TOP, mode=Mode.PRIVATE)
    with BuildSketch(Plane(origin=(22, 10.751262658, -209), x_dir=(-0.7071067811865493, 0, -0.7071067811865457), z_dir=(0, 1, 0))) as redondeo2_piece_13b_section:
        with BuildLine():
            Bezier((2.899494937, 0), (0, 0), (-2.050252532, 2.050252532), weights=[1, 0.428571429, 1])
            Line((-2.050252532, 2.050252532), (0, 0))
            Line((0, 0), (2.899494937, 0))
        make_face()
    redondeo2_piece_13b = extrude(amount=16.248737342, mode=Mode.PRIVATE)
    redondeo2_piece_13b = split(redondeo2_piece_13b, bisect_by=Plane(origin=(22, 14.375631329, -212.624368671), z_dir=(0, -0.7071067811865476, 0.7071067811865476)), keep=Keep.TOP, mode=Mode.PRIVATE)
    redondeo2_piece_13b = split(redondeo2_piece_13b, bisect_by=Plane(origin=(22, 18, -209), z_dir=(0, -1, 0)), keep=Keep.TOP, mode=Mode.PRIVATE)
    redondeo2_piece_13 = redondeo2_piece_13a & redondeo2_piece_13b
    add(redondeo2_piece_13, mode=Mode.SUBTRACT)

    # Croquis6 → Saliente-Extruir5 (add)
    with BuildSketch(Plane(origin=(0, 18, 0), x_dir=(1, 0, 0), z_dir=(0, 1, 0))):
        with Locations((28, 40.667086889)):
            Rectangle(CROQUIS6_W, CROQUIS6_H)
    extrude(amount=SALIENTE_EXTRUIR5_DEPTH)

    # Croquis7 → Cortar-Extruir2 (cut, up to next)
    with BuildSketch(Plane.ZY.offset(5), mode=Mode.PRIVATE) as cortar_extruir2_sk1:
        with Locations((-121, 183)):
            Rectangle(CROQUIS7_W, CROQUIS7_H)
    cortar_extruir2_tool1 = extrude(cortar_extruir2_sk1.sketch, amount=-CORTAR_EXTRUIR2_REACH, mode=Mode.PRIVATE) & part.part
    add(cortar_extruir2_tool1.solids().sort_by_distance((-5, 183, -121))[0], mode=Mode.SUBTRACT)


solid = part.part
